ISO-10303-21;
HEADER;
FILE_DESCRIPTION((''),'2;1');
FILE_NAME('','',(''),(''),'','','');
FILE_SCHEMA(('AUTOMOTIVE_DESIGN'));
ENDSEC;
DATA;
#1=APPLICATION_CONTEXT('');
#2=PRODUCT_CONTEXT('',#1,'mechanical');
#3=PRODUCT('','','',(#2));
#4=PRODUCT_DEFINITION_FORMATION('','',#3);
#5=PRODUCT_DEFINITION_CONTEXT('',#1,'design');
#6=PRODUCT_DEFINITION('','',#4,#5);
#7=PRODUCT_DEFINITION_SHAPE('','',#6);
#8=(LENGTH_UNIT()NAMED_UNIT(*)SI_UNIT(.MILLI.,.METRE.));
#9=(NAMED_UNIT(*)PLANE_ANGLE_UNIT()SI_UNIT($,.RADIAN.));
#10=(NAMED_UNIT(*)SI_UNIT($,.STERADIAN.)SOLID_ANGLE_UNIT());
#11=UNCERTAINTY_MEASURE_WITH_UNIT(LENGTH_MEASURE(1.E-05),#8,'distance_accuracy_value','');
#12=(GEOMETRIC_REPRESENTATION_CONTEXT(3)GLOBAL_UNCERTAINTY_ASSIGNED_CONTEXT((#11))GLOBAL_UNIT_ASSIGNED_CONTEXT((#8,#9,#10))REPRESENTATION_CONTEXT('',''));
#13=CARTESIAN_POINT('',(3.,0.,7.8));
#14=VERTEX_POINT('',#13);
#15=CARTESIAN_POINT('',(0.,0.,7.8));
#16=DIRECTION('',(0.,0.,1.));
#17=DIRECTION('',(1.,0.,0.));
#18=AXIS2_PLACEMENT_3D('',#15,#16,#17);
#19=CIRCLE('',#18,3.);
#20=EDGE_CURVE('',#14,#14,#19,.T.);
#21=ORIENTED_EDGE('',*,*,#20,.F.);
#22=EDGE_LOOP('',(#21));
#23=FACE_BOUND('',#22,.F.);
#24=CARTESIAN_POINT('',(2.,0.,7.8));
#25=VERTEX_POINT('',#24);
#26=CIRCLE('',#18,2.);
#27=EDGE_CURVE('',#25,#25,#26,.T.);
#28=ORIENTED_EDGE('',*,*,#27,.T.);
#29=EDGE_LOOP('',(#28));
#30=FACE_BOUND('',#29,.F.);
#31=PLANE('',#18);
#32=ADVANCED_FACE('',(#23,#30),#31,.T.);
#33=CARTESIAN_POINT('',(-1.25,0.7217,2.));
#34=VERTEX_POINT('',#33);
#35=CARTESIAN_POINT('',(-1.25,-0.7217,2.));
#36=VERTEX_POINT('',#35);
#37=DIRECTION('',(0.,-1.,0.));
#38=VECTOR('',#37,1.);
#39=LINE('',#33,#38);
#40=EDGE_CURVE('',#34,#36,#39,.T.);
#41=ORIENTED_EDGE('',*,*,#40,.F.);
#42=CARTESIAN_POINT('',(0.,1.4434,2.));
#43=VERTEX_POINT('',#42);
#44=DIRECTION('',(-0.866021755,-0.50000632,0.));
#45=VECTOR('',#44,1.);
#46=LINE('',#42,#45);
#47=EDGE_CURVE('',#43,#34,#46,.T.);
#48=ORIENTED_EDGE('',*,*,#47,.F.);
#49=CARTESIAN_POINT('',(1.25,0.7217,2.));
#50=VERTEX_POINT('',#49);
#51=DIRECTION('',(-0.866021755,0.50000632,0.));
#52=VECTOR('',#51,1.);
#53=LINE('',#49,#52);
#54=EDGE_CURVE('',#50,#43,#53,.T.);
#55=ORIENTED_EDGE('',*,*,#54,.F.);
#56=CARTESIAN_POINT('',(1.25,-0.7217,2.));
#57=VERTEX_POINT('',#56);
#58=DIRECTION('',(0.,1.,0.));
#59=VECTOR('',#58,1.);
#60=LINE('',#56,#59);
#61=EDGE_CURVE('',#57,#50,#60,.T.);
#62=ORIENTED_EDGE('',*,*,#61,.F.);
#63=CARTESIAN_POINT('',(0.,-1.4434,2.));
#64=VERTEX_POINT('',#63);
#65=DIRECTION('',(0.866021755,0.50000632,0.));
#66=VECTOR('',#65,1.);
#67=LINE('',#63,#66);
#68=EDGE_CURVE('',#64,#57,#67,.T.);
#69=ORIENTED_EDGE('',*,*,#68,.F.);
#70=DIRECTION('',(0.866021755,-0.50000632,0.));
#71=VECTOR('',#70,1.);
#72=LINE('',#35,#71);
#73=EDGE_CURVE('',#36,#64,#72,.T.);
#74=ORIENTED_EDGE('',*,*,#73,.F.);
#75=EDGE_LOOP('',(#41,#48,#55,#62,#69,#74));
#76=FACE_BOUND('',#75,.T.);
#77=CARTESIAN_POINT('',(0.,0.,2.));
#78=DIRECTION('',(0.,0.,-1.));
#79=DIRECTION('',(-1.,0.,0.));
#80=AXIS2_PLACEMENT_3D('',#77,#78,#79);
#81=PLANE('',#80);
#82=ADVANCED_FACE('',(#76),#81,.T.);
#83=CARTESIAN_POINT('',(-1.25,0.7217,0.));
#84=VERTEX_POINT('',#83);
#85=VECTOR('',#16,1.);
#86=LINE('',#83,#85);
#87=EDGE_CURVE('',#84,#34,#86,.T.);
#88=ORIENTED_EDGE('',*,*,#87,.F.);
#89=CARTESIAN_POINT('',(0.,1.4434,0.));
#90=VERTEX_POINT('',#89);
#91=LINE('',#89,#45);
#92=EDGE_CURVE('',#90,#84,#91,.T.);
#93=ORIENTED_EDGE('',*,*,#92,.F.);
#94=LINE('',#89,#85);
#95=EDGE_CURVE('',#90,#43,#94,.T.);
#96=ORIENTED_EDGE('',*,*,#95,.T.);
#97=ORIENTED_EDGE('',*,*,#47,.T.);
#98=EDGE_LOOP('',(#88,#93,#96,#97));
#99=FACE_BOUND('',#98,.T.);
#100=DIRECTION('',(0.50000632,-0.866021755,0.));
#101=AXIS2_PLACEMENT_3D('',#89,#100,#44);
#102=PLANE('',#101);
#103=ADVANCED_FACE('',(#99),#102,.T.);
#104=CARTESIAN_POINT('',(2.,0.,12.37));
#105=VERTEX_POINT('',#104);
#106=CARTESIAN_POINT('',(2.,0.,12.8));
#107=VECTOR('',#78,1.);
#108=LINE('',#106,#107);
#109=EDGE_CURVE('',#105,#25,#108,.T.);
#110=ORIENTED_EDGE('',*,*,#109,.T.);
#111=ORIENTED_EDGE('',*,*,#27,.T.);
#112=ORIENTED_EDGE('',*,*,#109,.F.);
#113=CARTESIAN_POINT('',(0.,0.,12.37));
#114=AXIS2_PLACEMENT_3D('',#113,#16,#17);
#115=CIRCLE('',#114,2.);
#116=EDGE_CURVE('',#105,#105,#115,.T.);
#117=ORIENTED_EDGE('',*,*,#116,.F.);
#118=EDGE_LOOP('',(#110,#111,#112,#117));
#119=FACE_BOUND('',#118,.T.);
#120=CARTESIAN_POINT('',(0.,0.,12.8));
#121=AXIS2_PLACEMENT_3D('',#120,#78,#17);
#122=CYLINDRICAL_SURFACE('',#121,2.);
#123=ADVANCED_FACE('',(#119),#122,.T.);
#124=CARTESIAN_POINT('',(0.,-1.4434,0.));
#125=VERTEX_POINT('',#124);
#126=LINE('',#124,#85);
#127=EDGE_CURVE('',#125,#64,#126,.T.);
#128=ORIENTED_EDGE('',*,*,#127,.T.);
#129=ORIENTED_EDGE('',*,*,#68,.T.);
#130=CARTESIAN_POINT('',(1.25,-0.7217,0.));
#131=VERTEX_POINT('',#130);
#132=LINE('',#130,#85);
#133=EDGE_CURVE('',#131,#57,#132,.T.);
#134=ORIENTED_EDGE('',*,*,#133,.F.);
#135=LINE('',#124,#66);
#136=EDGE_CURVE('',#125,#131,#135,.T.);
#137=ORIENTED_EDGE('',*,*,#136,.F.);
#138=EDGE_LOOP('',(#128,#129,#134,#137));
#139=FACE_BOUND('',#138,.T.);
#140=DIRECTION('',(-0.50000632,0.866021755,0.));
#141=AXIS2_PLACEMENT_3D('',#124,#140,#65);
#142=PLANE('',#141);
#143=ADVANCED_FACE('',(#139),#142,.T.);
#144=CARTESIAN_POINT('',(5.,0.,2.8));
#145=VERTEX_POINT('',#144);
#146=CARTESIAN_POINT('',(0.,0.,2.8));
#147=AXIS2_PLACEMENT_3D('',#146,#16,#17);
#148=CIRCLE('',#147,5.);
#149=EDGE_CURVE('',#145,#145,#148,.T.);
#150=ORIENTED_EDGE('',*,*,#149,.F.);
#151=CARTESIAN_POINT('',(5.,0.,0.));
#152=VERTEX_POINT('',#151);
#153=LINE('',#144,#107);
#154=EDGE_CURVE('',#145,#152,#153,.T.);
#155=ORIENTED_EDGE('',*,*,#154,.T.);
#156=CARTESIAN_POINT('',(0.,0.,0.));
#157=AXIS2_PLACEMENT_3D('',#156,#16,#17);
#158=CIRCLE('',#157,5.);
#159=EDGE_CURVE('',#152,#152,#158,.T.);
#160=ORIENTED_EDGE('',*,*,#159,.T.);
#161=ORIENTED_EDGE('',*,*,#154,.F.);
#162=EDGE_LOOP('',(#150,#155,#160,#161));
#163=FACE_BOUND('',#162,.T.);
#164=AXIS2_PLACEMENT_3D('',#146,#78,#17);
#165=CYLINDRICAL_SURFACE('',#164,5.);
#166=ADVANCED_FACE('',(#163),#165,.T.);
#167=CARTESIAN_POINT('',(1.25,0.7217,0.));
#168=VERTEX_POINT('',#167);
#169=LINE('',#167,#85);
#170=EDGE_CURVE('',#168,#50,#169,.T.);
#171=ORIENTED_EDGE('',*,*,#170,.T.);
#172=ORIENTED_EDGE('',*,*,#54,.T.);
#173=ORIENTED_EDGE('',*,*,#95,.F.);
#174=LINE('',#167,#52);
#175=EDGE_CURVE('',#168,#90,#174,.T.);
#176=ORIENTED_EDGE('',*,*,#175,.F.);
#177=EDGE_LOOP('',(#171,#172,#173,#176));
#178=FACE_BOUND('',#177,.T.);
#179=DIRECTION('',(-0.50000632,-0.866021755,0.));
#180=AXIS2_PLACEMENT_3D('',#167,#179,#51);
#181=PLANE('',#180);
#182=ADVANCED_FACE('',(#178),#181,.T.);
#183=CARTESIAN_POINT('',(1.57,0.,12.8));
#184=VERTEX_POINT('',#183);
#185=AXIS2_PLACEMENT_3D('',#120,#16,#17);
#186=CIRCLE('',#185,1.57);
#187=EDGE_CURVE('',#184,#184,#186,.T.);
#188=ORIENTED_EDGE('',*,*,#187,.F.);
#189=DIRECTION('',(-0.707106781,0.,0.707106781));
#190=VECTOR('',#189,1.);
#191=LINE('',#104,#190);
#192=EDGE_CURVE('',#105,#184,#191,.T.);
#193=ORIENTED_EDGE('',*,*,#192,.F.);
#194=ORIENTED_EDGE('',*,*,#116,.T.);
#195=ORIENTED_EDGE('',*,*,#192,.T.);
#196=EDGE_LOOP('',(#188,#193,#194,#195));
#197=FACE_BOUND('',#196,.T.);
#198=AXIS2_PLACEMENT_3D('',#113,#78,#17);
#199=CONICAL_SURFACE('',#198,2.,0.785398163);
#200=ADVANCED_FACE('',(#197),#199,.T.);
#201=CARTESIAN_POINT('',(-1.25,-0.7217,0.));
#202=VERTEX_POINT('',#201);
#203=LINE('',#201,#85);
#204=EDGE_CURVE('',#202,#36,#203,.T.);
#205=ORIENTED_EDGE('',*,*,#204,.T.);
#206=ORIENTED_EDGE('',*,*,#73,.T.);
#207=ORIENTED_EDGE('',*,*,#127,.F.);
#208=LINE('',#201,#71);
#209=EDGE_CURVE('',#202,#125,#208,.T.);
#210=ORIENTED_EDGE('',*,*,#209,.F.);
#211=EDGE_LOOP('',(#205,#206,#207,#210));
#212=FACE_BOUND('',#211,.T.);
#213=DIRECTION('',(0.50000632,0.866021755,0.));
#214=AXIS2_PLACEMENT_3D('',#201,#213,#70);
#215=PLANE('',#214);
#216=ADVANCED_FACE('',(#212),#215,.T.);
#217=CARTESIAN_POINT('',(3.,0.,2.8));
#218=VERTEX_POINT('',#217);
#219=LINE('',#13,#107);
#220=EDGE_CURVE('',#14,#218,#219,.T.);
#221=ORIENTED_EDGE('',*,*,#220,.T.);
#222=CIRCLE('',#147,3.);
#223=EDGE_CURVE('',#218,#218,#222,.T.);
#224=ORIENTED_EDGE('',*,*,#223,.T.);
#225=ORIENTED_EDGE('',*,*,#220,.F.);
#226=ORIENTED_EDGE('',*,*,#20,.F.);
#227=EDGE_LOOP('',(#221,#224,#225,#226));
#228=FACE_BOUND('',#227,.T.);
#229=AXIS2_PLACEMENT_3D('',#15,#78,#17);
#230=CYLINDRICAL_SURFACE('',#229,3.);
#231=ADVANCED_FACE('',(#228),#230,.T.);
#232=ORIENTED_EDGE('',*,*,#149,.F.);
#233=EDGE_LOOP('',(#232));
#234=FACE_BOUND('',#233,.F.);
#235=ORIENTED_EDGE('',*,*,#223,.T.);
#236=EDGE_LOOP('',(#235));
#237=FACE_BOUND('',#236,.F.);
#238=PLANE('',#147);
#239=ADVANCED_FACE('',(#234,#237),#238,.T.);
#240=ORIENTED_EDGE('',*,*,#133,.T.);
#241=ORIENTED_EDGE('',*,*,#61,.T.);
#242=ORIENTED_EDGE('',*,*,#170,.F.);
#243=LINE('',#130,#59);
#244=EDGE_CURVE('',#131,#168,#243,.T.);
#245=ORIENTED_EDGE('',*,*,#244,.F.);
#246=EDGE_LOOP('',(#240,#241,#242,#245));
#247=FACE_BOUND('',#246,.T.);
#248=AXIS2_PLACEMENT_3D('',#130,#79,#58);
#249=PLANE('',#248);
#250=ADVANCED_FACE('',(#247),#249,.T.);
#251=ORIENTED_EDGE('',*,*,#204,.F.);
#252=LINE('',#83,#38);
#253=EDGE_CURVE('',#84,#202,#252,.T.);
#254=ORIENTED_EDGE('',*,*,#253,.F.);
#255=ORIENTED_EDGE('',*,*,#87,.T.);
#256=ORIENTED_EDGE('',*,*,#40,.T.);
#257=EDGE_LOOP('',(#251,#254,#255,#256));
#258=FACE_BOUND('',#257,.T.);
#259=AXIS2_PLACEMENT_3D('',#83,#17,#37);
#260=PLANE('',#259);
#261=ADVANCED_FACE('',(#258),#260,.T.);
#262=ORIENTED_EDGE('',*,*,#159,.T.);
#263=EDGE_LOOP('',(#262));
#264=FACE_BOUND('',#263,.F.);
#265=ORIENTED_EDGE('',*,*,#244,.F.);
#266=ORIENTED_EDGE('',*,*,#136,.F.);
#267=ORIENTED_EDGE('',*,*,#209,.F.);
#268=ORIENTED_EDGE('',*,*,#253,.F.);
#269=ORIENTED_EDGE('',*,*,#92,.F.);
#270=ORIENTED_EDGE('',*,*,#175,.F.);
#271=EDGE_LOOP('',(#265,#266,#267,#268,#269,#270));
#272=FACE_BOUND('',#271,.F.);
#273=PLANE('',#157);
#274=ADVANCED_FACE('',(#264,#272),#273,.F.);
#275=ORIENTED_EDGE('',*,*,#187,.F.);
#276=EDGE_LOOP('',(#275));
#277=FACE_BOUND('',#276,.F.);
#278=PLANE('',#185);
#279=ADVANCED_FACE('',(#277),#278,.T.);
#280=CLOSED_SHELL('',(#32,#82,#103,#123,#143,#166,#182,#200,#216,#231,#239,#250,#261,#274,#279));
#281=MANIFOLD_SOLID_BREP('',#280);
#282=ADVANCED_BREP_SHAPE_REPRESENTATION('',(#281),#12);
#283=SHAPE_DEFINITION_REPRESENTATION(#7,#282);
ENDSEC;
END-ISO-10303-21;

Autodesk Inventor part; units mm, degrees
ref_plane "YZ Plane" through (0, 0, 0) normal (1, 0, 0) x (0, 1, 0)
ref_plane "XZ Plane" through (0, 0, 0) normal (0, 1, 0) x (-1, 0, 0)
ref_plane "XY Plane" through (0, 0, 0) normal (0, 0, 1) x (1, 0, 0)
sketch "Sketch1" plane through (0, 0, 0) normal (0, 1, 0) x (-1, 0, 0)
  line L0 (0, 0) -> (0, 12.8)
  line L1 (0, 12.8) -> (-2, 12.8)
  line L2 (-2, 12.8) -> (-2, 7.8)
  line L3 (-2, 7.8) -> (-3, 7.8)
  line L4 (-3, 7.8) -> (-3, 2.8)
  line L5 (-3, 2.8) -> (-5, 2.8)
  line L6 (-5, 2.8) -> (-5, 0)
  line L7 (-5, 0) -> (0, 0)
  dimension "d0" = 10
  dimension "d1" = 6
  dimension "d2" = 4
  dimension "d3" = 5
  dimension "d4" = 5
  dimension "d5" = 2.8
revolve "Revolution1" add sketch "Sketch1" angle 360 about axis through (0, 0, 0) along (0, 0, 1)
thread "Thread1" size "M4x0.7" class "6g" standard "ANSI Metric M Profile" length 6 offset 1.2
sketch "Sketch2" plane through (0, 0, 0) normal (0, 0, -1) x (-1, 0, 0)
  line L0 (0, 1.4434) -> (1.25, 0.7217)
  line L1 (1.25, 0.7217) -> (1.25, -0.7217)
  line L2 (1.25, -0.7217) -> (0, -1.4434)
  line L3 (0, -1.4434) -> (-1.25, -0.7217)
  line L4 (-1.25, -0.7217) -> (-1.25, 0.7217)
  line L5 (-1.25, 0.7217) -> (0, 1.4434)
  point P0 (0, 0)
  point P1 (0, 0)
  dimension "d9" = 2.5
extrude "Extrusion1" cut sketch "Sketch2" against normal blind 2
chamfer "Chamfer1" distance 0.43 angle 45 1 edges at (-2, 0, 12.8)
properties part number "DBSY4-5-5" material "Stainless Steel AISI 304"
